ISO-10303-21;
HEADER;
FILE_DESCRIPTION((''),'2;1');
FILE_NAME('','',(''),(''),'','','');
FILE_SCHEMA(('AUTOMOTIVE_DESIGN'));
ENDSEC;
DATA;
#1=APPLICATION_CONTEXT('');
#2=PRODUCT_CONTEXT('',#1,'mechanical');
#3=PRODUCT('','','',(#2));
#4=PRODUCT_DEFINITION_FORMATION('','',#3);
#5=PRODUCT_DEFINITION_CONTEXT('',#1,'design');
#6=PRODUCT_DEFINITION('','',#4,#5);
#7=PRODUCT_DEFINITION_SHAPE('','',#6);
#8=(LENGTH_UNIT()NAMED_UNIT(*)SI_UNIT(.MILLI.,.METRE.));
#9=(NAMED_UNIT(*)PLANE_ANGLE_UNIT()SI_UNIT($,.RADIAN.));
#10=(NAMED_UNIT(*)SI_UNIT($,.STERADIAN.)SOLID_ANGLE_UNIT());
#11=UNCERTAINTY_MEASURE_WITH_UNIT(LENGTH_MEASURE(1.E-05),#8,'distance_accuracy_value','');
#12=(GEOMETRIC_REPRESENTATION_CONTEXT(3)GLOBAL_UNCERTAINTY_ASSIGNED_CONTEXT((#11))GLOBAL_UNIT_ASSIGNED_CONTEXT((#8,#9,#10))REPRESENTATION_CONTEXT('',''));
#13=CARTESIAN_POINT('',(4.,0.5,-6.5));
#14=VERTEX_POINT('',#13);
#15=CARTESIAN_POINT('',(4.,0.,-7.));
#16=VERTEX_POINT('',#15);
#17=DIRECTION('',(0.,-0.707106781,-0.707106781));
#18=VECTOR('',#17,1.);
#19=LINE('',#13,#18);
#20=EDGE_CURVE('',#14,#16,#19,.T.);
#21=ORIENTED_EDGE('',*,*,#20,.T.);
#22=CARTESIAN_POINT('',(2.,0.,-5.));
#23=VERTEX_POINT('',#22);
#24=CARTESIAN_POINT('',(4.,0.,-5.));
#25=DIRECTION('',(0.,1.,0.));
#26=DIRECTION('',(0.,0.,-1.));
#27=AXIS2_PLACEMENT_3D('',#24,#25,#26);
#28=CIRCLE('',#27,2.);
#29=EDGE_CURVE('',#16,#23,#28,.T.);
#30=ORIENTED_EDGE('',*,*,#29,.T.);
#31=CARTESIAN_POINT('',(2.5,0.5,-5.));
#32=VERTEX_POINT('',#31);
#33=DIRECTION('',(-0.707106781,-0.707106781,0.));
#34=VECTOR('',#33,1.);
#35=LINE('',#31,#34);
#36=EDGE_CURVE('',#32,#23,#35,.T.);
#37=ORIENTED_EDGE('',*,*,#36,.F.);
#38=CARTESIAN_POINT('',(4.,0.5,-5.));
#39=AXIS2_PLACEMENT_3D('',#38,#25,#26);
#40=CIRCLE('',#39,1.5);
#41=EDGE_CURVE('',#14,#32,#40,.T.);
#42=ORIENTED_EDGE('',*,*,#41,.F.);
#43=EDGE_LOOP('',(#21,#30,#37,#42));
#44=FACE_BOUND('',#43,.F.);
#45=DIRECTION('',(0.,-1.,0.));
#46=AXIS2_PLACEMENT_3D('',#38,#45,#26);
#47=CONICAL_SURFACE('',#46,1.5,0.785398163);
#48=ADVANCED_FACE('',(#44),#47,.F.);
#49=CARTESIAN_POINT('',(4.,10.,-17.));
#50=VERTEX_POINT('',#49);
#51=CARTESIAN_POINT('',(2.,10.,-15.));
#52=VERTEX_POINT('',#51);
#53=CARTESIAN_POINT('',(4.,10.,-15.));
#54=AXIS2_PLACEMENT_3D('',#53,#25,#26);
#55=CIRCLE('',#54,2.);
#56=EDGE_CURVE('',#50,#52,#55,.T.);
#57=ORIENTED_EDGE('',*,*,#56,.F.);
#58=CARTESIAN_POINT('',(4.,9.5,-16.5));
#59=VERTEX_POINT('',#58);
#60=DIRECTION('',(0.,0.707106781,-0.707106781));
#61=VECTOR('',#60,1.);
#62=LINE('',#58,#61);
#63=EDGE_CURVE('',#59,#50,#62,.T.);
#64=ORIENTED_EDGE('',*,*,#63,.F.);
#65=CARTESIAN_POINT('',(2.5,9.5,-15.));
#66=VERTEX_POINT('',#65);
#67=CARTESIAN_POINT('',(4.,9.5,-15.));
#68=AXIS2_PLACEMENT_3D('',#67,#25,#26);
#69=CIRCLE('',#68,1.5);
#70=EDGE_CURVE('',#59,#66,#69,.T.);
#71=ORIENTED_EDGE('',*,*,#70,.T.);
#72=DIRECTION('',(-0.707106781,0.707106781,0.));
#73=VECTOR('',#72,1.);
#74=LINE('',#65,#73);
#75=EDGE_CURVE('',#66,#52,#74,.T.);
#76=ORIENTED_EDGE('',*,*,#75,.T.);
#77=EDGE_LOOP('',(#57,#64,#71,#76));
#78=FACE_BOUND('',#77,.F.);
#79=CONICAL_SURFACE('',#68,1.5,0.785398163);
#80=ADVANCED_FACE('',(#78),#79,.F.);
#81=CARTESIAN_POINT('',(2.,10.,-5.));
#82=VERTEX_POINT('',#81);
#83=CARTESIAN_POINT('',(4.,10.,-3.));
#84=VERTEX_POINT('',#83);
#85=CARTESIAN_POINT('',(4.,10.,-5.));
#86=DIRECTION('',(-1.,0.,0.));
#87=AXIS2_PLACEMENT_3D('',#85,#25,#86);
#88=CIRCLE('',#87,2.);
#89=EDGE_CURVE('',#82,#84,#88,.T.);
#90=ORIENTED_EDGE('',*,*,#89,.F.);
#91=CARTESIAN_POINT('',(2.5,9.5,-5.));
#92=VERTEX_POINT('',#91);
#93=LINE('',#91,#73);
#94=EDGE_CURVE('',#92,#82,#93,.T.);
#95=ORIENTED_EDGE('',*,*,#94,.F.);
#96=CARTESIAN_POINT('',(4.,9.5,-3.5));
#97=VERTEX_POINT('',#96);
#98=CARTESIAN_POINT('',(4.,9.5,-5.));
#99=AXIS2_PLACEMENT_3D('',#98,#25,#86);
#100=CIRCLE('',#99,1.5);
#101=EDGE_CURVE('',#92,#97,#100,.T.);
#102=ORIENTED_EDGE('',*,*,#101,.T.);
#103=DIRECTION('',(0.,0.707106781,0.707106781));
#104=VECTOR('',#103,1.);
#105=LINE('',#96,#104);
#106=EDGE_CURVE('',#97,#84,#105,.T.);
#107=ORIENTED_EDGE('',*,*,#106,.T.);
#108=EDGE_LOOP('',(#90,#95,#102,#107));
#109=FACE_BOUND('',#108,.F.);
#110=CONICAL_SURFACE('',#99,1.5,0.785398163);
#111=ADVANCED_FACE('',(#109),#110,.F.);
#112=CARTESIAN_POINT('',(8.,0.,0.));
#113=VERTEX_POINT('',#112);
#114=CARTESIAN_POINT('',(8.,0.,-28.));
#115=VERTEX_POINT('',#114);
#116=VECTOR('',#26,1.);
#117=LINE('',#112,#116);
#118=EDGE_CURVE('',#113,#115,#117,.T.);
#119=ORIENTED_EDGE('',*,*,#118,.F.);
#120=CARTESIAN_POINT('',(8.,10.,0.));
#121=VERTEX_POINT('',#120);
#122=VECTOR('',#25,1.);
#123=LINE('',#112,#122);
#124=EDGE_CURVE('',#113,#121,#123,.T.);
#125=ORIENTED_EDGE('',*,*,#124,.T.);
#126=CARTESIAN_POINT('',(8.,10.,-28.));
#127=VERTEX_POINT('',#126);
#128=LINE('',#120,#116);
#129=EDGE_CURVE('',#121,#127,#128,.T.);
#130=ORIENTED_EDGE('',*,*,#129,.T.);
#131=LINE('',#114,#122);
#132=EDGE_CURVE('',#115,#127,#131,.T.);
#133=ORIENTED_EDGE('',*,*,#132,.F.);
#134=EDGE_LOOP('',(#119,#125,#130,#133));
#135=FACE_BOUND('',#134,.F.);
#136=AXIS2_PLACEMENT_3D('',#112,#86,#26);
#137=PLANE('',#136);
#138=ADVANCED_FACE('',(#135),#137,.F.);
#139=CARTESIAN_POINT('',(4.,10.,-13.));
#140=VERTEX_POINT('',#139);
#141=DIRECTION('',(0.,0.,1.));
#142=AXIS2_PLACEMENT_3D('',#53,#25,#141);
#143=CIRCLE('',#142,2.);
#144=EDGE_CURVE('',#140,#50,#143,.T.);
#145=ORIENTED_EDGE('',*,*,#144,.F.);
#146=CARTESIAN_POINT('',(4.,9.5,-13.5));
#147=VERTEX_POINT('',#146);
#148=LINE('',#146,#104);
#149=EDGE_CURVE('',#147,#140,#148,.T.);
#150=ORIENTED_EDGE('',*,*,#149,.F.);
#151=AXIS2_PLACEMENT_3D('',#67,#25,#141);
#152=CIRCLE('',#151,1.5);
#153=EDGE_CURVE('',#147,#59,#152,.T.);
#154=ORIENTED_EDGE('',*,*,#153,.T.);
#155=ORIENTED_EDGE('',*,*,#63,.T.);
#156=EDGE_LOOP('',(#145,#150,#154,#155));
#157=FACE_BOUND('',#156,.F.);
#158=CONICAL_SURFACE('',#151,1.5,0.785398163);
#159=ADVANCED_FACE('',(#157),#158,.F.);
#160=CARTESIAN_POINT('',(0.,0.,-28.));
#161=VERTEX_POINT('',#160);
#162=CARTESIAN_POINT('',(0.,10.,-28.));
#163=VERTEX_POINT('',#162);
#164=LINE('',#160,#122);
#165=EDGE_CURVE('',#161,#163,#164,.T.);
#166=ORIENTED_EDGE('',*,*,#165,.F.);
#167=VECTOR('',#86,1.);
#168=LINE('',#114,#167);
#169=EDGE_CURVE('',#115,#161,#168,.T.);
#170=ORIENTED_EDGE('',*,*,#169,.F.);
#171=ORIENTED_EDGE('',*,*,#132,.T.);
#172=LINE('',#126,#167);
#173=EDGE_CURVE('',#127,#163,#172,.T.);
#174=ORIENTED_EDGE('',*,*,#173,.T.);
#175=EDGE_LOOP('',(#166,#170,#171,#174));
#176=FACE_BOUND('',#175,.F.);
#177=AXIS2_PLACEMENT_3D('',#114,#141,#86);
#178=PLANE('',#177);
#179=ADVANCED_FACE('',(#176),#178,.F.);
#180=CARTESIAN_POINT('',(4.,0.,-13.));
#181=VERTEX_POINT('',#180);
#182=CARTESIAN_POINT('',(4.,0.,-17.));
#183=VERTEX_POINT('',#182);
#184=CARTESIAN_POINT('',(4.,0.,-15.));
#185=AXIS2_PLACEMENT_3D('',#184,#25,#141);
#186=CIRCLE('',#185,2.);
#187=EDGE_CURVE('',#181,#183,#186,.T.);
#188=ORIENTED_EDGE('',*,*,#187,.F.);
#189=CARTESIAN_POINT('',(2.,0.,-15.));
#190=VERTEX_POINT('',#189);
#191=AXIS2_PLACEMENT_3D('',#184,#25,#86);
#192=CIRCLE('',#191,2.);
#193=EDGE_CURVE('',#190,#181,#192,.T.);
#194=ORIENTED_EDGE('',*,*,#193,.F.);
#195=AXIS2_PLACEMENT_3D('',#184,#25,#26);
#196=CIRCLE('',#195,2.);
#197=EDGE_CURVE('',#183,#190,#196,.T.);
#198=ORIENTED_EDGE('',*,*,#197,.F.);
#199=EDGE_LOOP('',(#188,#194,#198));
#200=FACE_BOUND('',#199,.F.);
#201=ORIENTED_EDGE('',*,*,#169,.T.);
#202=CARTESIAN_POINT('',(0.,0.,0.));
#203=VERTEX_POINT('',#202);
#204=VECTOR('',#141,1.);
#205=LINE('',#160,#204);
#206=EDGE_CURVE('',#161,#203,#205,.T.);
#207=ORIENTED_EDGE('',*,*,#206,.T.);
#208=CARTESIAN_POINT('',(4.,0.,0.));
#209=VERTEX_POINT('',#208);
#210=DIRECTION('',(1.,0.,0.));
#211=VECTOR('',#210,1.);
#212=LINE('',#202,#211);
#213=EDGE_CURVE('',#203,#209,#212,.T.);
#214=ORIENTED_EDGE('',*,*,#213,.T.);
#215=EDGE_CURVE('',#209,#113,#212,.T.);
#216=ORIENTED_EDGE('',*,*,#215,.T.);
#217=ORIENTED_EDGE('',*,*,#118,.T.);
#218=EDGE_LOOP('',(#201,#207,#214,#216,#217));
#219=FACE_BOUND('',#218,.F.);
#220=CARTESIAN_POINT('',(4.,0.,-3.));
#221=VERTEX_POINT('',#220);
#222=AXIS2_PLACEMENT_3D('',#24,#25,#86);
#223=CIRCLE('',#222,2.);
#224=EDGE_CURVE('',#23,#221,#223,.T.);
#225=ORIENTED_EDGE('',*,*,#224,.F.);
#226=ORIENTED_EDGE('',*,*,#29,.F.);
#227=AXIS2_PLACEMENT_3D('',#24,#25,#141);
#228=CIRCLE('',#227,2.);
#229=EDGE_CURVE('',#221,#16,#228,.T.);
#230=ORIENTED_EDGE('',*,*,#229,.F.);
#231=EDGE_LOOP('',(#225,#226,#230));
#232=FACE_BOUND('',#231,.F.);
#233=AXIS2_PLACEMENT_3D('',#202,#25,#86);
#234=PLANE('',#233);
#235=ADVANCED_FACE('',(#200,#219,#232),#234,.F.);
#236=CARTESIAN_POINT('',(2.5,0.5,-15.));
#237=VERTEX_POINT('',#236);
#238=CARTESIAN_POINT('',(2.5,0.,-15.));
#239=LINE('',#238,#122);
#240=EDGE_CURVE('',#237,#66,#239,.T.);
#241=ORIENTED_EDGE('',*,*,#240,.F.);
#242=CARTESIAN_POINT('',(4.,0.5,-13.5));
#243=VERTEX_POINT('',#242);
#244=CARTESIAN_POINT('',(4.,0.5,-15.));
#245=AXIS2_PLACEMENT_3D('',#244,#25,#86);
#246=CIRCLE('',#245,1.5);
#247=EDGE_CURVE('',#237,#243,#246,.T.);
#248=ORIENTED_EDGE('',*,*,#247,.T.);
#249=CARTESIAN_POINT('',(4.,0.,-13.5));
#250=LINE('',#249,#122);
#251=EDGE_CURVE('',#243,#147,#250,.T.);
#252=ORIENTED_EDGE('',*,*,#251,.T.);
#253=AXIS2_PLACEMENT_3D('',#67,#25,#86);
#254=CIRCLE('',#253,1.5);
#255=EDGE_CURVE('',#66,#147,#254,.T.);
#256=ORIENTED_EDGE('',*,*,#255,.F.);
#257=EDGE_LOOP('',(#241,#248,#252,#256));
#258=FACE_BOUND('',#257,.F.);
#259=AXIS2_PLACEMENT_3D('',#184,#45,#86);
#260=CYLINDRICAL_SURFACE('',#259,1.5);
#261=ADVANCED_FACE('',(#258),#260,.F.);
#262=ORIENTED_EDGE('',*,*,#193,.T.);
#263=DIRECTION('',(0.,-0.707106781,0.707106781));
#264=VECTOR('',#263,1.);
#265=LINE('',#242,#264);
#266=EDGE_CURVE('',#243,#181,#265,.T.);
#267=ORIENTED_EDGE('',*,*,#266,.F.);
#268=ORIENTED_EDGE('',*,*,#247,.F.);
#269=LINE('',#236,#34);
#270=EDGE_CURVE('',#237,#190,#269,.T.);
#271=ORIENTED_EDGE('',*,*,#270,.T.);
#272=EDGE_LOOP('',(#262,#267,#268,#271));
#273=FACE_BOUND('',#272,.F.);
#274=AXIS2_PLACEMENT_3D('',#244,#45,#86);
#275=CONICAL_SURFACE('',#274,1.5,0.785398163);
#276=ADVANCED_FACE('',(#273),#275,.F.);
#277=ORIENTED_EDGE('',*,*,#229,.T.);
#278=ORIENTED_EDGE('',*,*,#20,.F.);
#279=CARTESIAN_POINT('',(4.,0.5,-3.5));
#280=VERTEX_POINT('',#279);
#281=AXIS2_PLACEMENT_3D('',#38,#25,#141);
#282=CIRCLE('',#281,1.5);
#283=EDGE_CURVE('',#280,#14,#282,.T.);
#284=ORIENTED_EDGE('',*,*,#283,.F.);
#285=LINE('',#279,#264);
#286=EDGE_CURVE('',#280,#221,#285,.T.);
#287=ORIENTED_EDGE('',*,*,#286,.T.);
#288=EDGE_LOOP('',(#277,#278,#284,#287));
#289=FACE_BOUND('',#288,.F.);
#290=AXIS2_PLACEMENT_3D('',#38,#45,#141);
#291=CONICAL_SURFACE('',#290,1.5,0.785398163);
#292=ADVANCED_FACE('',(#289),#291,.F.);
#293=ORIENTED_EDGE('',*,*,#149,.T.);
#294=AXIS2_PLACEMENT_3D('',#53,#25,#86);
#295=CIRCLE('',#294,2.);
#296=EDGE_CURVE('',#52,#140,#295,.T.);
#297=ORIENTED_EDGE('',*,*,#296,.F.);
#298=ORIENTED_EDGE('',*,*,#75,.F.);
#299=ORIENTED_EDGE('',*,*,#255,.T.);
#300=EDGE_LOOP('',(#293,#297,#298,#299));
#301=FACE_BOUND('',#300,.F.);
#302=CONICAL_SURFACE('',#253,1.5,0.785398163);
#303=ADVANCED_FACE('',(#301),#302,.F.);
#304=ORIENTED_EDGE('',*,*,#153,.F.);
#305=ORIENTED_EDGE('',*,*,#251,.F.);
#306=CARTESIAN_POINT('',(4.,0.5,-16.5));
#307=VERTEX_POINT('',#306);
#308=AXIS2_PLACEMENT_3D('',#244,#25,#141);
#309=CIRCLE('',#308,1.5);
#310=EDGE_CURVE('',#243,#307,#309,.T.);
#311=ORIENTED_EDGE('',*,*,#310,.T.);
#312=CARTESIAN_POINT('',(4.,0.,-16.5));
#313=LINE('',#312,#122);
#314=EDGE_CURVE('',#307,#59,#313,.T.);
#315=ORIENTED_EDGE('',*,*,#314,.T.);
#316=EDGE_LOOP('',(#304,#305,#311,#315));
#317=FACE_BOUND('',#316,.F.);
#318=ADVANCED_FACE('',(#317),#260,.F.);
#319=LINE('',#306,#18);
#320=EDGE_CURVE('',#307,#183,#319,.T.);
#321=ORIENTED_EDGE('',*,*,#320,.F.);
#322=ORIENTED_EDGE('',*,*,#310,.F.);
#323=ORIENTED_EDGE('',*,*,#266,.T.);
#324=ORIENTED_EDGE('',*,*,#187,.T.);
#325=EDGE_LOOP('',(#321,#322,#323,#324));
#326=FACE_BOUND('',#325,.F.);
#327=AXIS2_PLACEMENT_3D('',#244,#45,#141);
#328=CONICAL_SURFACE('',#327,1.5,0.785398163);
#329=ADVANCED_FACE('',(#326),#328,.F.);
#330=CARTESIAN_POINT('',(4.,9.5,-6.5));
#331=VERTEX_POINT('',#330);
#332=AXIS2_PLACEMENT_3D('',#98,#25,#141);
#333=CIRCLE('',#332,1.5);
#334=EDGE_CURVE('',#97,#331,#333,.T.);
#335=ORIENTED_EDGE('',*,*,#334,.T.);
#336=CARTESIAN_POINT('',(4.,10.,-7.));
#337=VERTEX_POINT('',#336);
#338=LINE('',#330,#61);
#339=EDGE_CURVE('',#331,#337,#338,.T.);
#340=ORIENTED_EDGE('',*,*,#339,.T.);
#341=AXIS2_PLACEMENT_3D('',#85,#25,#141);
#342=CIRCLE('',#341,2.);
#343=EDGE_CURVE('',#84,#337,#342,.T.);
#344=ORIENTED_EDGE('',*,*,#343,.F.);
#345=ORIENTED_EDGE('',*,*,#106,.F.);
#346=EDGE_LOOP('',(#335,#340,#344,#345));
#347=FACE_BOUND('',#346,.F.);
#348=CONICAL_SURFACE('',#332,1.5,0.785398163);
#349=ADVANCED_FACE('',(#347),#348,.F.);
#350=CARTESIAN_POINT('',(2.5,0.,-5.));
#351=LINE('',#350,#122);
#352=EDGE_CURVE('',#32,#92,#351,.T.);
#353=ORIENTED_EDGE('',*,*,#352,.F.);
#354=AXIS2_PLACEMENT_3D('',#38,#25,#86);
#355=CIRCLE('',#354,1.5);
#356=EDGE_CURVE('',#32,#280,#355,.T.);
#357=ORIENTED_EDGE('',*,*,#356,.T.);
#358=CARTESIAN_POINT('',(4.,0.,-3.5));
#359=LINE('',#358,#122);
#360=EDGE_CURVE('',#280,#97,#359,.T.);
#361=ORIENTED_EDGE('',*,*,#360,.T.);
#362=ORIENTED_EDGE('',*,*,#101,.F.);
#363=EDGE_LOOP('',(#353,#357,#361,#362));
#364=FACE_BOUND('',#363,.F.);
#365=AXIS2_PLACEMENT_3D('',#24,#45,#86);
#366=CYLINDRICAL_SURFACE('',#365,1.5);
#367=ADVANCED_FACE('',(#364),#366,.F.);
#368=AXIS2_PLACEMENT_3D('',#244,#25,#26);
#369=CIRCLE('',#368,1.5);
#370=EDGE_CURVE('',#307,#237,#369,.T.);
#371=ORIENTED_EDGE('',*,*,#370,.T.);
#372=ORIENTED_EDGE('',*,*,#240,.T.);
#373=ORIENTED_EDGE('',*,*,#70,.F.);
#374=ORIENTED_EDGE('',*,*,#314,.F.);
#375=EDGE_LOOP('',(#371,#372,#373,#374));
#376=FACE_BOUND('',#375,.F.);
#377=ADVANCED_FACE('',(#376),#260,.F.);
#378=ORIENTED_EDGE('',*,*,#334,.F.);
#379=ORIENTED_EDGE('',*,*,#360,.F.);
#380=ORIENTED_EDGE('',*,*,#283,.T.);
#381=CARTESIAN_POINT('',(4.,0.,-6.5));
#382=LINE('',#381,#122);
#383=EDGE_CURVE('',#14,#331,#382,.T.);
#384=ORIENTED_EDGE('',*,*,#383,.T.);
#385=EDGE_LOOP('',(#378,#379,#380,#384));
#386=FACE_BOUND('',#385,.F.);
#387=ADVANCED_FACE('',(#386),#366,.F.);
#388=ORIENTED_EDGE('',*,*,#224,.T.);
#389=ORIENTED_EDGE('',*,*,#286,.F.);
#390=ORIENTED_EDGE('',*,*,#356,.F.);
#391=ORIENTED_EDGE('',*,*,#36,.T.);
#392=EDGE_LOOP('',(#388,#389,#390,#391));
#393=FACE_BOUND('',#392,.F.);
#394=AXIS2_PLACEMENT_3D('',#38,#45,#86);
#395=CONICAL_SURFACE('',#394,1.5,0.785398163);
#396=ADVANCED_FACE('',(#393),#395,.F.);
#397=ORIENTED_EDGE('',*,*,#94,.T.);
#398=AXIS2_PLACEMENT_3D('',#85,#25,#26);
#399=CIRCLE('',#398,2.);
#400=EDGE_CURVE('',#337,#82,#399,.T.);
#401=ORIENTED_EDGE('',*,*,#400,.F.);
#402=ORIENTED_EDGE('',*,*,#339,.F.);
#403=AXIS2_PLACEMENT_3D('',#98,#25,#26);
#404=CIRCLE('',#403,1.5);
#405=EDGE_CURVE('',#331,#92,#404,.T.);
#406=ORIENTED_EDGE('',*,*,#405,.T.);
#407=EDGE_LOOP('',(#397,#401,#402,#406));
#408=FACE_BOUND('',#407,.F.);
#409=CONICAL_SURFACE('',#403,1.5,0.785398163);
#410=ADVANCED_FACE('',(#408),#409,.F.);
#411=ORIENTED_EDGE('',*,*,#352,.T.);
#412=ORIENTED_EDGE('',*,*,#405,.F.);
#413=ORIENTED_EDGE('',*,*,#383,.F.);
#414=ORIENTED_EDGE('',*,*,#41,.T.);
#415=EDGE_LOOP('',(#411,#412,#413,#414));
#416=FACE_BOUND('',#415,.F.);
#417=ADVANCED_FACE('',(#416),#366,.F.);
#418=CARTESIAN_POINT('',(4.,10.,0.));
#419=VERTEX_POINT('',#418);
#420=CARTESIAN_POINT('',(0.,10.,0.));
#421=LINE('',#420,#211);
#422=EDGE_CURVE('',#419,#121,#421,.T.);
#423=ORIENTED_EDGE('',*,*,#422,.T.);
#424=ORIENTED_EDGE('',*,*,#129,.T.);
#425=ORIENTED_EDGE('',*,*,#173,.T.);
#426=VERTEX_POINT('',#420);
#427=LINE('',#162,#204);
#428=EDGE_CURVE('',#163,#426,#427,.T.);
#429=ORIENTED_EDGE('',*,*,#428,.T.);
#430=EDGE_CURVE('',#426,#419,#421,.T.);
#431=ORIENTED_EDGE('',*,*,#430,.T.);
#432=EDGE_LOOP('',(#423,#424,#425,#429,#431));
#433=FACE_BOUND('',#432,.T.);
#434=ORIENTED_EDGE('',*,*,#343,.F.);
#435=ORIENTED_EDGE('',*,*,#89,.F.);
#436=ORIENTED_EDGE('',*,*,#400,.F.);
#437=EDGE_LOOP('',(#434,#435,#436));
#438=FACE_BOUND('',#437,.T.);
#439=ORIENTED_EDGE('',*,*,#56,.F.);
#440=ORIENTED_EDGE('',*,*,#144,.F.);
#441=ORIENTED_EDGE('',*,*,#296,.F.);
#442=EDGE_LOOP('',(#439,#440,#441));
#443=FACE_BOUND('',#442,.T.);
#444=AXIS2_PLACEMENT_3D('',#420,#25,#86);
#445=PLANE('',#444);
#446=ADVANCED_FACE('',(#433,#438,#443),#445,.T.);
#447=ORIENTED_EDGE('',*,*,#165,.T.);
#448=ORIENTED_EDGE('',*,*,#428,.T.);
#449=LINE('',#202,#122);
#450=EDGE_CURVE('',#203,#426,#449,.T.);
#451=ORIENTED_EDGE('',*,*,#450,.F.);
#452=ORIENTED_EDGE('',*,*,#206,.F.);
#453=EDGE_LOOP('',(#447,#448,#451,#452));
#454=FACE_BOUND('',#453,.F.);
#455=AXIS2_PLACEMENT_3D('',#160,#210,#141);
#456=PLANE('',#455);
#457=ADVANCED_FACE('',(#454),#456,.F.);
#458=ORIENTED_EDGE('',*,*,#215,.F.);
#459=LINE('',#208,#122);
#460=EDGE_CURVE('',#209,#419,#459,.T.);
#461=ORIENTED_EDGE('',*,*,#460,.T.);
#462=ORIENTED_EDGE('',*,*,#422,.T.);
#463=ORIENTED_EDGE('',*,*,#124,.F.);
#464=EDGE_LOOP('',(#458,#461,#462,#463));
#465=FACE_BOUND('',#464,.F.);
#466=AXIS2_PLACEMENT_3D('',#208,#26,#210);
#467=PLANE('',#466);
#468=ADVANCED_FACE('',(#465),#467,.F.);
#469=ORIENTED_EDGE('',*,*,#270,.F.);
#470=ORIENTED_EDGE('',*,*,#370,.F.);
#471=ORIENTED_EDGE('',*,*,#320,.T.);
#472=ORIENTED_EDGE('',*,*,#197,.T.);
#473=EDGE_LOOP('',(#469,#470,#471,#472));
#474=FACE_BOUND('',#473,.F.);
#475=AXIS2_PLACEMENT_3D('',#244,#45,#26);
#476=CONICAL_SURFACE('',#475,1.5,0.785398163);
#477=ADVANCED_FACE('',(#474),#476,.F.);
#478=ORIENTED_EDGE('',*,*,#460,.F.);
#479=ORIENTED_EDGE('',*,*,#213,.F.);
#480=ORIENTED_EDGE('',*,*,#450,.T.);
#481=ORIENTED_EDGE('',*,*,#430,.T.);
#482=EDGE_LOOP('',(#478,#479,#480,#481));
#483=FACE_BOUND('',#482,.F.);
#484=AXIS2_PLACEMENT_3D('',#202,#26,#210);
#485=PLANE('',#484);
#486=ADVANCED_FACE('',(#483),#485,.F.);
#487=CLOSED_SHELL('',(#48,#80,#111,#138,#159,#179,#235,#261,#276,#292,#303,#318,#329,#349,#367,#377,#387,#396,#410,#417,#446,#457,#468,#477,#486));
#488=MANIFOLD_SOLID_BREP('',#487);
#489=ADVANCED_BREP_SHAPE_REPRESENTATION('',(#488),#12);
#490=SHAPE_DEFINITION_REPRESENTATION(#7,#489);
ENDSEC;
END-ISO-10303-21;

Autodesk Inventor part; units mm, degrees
ref_plane "YZ Plane" through (0, 0, 0) normal (1, 0, 0) x (0, 1, 0)
ref_plane "XZ Plane" through (0, 0, 0) normal (0, 1, 0) x (-1, 0, 0)
ref_plane "XY Plane" through (0, 0, 0) normal (0, 0, 1) x (1, 0, 0)
sketch "Эскиз1" plane through (0, 0, 0) normal (0, 1, 0) x (-1, 0, 0)
  line L0 (0, 0) -> (-8, 0)
  line L1 (-8, 0) -> (-8, -28)
  line L2 (-8, -28) -> (0, -28)
  line L3 (0, -28) -> (0, 0)
  line L4 (-4, 0) -> (-4, -10)
  line L5 (-4, -10) -> (-4, -20)
  line L6 (-4, -20) -> (-4, -15)
  line L7 (-4, 0) -> (-4, -5)
  circle A0 centre (-4, -5) radius 1.5
  circle A1 centre (-4, -15) radius 1.5
  dimension "d0" = 8
  dimension "d1" = 28
  dimension "d2" = 10
  dimension "d3" = 10
  dimension "d4" = 3
extrude "Выдавливание1" add sketch "Эскиз1" along normal blind 10
chamfer "Фаска1" distance 0.5 angle 45 4 edges at (5.5, 10, -5) (5.5, 10, -15) (5.5, 0, -15) (5.5, 0, -5)
properties part number "Ограничитель"
